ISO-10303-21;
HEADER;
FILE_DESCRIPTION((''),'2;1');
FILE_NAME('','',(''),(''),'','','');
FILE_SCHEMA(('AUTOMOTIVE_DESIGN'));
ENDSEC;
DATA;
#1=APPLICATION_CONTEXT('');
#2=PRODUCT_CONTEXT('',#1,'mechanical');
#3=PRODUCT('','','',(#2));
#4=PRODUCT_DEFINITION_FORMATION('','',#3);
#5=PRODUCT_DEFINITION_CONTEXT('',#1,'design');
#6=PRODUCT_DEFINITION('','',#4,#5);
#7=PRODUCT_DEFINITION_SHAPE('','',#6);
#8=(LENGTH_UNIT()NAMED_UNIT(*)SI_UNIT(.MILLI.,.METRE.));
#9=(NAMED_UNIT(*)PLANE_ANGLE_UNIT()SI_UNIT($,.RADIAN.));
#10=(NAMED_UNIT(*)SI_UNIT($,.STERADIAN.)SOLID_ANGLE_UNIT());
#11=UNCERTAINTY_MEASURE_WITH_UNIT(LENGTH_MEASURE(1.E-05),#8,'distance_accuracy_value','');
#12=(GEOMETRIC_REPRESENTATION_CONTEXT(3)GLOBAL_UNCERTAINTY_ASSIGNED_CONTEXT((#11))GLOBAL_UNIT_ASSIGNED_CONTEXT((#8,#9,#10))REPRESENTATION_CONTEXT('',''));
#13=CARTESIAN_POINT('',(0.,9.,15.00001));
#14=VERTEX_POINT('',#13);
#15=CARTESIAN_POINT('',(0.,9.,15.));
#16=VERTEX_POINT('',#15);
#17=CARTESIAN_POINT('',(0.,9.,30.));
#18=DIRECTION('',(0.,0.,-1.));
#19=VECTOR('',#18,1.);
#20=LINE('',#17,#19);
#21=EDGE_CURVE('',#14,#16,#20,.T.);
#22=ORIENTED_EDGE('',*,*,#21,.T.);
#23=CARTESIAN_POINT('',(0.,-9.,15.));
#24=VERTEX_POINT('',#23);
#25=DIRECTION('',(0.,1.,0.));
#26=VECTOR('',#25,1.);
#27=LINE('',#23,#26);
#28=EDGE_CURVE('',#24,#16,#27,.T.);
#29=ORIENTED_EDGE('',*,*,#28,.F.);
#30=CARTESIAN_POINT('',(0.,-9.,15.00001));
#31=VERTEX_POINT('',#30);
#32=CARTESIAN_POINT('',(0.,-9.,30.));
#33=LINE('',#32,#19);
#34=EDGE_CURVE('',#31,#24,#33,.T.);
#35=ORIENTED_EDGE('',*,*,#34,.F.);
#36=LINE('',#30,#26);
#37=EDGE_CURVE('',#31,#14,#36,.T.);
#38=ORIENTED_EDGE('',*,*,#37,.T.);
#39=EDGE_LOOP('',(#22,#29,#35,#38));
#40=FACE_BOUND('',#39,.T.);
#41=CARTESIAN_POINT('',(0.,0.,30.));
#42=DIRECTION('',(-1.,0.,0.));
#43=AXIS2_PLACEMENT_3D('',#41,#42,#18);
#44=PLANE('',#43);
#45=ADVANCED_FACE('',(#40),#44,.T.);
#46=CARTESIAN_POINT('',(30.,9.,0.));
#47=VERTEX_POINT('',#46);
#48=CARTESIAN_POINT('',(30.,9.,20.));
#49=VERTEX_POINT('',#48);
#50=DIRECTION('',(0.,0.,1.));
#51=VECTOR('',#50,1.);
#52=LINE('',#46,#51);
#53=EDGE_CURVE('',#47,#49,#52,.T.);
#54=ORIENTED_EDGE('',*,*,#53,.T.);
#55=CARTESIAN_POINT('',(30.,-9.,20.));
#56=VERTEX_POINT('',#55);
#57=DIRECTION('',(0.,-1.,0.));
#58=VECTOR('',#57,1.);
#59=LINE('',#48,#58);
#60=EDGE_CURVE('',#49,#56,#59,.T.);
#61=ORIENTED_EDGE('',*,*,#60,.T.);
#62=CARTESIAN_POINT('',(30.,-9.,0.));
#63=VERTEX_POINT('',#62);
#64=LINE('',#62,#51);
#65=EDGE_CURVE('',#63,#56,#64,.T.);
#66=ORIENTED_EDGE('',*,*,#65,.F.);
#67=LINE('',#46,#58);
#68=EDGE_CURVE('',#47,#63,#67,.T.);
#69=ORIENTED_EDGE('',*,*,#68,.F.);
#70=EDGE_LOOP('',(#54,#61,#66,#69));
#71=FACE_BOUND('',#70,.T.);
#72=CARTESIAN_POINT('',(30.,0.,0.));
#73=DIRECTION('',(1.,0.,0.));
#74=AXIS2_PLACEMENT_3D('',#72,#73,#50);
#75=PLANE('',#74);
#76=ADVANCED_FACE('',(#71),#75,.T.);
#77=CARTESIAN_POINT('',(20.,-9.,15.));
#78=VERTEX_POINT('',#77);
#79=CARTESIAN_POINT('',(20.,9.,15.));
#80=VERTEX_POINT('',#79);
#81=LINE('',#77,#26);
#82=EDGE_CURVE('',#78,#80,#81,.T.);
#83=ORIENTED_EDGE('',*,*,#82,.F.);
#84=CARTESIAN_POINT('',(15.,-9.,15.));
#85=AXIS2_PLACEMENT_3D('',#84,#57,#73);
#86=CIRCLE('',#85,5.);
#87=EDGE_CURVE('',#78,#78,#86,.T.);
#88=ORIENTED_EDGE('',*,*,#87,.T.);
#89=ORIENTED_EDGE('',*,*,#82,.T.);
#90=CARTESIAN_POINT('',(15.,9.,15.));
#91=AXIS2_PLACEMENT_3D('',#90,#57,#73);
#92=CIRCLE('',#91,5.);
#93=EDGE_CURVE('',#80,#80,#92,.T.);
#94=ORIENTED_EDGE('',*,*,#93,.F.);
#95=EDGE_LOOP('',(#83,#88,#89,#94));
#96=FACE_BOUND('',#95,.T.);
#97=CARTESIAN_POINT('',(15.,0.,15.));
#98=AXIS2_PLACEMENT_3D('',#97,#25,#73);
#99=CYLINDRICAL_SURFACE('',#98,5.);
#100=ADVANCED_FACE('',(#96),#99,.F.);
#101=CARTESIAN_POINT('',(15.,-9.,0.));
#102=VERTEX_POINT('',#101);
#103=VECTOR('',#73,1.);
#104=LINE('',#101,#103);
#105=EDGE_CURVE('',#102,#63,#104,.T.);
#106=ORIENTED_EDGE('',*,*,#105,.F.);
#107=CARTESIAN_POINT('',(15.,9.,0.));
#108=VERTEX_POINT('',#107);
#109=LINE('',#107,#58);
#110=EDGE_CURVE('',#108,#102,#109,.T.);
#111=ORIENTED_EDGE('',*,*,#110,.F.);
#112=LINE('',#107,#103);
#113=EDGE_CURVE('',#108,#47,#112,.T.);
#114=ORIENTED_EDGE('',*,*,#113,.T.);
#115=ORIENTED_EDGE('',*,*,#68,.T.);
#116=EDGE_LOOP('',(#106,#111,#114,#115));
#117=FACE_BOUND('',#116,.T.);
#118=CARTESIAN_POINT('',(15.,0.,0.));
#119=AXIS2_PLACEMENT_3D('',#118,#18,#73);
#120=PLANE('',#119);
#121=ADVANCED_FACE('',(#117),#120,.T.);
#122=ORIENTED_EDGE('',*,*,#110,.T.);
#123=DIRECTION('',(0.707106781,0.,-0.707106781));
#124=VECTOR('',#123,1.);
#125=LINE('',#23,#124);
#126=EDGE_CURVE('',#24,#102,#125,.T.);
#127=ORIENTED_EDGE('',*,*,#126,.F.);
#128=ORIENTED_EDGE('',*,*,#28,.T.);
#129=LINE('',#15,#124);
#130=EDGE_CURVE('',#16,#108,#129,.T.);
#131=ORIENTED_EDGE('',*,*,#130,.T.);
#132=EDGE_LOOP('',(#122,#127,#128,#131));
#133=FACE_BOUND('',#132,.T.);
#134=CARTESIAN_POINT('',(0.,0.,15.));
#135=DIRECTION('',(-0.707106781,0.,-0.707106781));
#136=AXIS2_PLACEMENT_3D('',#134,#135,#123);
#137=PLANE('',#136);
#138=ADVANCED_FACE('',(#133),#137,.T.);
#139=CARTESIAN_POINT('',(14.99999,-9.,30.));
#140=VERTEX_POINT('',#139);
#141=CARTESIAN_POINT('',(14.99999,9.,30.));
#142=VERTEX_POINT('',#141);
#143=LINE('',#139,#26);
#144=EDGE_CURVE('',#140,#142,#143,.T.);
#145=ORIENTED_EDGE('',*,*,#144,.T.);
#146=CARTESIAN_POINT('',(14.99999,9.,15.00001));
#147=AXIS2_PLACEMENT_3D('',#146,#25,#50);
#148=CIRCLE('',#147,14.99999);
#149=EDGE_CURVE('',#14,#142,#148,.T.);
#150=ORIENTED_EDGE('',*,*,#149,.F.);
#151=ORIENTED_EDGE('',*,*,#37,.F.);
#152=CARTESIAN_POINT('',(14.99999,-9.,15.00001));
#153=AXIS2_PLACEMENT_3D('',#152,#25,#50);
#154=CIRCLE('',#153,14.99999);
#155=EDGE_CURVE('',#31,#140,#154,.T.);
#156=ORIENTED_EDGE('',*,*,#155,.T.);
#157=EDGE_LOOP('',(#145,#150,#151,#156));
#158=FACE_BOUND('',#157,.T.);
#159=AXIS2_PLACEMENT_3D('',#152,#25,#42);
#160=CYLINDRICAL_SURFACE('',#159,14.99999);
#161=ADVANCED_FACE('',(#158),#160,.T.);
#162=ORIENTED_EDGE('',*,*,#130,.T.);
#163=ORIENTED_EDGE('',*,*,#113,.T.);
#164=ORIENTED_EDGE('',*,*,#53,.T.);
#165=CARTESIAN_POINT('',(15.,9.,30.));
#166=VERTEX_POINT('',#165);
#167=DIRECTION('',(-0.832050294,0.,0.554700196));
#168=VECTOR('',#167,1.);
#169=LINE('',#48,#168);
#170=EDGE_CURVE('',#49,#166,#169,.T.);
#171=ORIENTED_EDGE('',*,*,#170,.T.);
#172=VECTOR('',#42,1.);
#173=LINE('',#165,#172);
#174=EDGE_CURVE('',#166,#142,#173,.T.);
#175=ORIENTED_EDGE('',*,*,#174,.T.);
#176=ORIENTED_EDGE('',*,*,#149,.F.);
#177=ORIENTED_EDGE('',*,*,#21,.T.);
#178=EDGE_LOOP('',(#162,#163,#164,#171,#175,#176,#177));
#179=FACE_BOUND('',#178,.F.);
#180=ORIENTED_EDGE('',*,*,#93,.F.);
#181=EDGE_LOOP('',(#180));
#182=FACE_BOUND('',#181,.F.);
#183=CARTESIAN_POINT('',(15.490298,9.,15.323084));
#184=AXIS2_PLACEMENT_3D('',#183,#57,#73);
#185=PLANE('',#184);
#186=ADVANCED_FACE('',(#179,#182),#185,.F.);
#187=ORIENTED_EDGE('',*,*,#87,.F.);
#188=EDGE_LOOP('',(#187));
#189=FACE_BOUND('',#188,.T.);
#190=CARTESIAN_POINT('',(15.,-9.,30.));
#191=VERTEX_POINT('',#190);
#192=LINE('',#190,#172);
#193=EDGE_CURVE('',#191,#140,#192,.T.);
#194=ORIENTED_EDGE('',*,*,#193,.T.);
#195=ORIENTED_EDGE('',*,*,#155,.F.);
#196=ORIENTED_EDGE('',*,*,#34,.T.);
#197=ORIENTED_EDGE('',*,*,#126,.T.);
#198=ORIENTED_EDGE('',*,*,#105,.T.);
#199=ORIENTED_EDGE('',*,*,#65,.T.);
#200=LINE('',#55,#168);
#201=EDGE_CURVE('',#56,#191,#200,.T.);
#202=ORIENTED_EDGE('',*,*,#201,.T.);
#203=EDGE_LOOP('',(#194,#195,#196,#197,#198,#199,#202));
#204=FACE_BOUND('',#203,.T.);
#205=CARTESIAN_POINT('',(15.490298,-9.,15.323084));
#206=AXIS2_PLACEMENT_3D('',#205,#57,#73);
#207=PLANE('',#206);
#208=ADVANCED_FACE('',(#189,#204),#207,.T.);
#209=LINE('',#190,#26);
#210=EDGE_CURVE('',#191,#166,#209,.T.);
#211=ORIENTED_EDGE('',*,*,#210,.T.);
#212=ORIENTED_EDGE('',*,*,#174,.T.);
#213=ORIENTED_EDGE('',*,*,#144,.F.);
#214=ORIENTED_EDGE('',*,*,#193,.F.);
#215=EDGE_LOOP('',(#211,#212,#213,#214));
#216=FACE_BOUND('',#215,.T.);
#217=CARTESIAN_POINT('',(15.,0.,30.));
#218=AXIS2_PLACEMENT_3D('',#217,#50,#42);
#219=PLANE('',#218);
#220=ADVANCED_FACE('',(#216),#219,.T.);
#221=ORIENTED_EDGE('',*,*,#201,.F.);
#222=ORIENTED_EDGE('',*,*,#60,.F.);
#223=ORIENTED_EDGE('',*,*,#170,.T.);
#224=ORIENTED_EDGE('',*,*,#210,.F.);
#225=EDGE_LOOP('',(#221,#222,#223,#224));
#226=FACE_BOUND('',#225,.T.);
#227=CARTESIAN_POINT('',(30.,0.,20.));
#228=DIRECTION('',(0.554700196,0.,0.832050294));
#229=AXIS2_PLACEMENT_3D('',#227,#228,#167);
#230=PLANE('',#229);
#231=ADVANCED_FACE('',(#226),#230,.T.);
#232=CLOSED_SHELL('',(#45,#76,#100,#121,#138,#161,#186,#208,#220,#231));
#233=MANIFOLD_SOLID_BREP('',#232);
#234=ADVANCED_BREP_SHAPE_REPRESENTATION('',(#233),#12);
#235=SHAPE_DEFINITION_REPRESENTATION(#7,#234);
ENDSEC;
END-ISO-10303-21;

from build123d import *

# Parameters (mm, degrees)
F0_R     = 5
F1_DEPTH = 9
F2_R     = 14.99999


# Not quite as in the source:
# - a fillet or chamfer is up to 0.001 mm smaller than in the source, because OpenCascade refuses the exact size


with BuildPart() as f1:
    # F0 (on Front) → F1 (new body, symmetric)
    with BuildSketch(Plane.XZ):
        Polygon((0, 15), (15, 0), (30, 0), (30, 20), (15, 30), (0, 30), align=None)
        with Locations((15, 15)):
            Circle(F0_R, mode=Mode.SUBTRACT)
    extrude(amount=F1_DEPTH, both=True)

    # F2 (radius 15 in the source; OpenCascade refuses exactly that, so slightly less here)
    f2_edges = [f1.edges().sort_by_distance(p)[0] for p in [
        (0, 0, 30),
    ]]
    fillet(f2_edges, radius=F2_R)


solid = f1.part
